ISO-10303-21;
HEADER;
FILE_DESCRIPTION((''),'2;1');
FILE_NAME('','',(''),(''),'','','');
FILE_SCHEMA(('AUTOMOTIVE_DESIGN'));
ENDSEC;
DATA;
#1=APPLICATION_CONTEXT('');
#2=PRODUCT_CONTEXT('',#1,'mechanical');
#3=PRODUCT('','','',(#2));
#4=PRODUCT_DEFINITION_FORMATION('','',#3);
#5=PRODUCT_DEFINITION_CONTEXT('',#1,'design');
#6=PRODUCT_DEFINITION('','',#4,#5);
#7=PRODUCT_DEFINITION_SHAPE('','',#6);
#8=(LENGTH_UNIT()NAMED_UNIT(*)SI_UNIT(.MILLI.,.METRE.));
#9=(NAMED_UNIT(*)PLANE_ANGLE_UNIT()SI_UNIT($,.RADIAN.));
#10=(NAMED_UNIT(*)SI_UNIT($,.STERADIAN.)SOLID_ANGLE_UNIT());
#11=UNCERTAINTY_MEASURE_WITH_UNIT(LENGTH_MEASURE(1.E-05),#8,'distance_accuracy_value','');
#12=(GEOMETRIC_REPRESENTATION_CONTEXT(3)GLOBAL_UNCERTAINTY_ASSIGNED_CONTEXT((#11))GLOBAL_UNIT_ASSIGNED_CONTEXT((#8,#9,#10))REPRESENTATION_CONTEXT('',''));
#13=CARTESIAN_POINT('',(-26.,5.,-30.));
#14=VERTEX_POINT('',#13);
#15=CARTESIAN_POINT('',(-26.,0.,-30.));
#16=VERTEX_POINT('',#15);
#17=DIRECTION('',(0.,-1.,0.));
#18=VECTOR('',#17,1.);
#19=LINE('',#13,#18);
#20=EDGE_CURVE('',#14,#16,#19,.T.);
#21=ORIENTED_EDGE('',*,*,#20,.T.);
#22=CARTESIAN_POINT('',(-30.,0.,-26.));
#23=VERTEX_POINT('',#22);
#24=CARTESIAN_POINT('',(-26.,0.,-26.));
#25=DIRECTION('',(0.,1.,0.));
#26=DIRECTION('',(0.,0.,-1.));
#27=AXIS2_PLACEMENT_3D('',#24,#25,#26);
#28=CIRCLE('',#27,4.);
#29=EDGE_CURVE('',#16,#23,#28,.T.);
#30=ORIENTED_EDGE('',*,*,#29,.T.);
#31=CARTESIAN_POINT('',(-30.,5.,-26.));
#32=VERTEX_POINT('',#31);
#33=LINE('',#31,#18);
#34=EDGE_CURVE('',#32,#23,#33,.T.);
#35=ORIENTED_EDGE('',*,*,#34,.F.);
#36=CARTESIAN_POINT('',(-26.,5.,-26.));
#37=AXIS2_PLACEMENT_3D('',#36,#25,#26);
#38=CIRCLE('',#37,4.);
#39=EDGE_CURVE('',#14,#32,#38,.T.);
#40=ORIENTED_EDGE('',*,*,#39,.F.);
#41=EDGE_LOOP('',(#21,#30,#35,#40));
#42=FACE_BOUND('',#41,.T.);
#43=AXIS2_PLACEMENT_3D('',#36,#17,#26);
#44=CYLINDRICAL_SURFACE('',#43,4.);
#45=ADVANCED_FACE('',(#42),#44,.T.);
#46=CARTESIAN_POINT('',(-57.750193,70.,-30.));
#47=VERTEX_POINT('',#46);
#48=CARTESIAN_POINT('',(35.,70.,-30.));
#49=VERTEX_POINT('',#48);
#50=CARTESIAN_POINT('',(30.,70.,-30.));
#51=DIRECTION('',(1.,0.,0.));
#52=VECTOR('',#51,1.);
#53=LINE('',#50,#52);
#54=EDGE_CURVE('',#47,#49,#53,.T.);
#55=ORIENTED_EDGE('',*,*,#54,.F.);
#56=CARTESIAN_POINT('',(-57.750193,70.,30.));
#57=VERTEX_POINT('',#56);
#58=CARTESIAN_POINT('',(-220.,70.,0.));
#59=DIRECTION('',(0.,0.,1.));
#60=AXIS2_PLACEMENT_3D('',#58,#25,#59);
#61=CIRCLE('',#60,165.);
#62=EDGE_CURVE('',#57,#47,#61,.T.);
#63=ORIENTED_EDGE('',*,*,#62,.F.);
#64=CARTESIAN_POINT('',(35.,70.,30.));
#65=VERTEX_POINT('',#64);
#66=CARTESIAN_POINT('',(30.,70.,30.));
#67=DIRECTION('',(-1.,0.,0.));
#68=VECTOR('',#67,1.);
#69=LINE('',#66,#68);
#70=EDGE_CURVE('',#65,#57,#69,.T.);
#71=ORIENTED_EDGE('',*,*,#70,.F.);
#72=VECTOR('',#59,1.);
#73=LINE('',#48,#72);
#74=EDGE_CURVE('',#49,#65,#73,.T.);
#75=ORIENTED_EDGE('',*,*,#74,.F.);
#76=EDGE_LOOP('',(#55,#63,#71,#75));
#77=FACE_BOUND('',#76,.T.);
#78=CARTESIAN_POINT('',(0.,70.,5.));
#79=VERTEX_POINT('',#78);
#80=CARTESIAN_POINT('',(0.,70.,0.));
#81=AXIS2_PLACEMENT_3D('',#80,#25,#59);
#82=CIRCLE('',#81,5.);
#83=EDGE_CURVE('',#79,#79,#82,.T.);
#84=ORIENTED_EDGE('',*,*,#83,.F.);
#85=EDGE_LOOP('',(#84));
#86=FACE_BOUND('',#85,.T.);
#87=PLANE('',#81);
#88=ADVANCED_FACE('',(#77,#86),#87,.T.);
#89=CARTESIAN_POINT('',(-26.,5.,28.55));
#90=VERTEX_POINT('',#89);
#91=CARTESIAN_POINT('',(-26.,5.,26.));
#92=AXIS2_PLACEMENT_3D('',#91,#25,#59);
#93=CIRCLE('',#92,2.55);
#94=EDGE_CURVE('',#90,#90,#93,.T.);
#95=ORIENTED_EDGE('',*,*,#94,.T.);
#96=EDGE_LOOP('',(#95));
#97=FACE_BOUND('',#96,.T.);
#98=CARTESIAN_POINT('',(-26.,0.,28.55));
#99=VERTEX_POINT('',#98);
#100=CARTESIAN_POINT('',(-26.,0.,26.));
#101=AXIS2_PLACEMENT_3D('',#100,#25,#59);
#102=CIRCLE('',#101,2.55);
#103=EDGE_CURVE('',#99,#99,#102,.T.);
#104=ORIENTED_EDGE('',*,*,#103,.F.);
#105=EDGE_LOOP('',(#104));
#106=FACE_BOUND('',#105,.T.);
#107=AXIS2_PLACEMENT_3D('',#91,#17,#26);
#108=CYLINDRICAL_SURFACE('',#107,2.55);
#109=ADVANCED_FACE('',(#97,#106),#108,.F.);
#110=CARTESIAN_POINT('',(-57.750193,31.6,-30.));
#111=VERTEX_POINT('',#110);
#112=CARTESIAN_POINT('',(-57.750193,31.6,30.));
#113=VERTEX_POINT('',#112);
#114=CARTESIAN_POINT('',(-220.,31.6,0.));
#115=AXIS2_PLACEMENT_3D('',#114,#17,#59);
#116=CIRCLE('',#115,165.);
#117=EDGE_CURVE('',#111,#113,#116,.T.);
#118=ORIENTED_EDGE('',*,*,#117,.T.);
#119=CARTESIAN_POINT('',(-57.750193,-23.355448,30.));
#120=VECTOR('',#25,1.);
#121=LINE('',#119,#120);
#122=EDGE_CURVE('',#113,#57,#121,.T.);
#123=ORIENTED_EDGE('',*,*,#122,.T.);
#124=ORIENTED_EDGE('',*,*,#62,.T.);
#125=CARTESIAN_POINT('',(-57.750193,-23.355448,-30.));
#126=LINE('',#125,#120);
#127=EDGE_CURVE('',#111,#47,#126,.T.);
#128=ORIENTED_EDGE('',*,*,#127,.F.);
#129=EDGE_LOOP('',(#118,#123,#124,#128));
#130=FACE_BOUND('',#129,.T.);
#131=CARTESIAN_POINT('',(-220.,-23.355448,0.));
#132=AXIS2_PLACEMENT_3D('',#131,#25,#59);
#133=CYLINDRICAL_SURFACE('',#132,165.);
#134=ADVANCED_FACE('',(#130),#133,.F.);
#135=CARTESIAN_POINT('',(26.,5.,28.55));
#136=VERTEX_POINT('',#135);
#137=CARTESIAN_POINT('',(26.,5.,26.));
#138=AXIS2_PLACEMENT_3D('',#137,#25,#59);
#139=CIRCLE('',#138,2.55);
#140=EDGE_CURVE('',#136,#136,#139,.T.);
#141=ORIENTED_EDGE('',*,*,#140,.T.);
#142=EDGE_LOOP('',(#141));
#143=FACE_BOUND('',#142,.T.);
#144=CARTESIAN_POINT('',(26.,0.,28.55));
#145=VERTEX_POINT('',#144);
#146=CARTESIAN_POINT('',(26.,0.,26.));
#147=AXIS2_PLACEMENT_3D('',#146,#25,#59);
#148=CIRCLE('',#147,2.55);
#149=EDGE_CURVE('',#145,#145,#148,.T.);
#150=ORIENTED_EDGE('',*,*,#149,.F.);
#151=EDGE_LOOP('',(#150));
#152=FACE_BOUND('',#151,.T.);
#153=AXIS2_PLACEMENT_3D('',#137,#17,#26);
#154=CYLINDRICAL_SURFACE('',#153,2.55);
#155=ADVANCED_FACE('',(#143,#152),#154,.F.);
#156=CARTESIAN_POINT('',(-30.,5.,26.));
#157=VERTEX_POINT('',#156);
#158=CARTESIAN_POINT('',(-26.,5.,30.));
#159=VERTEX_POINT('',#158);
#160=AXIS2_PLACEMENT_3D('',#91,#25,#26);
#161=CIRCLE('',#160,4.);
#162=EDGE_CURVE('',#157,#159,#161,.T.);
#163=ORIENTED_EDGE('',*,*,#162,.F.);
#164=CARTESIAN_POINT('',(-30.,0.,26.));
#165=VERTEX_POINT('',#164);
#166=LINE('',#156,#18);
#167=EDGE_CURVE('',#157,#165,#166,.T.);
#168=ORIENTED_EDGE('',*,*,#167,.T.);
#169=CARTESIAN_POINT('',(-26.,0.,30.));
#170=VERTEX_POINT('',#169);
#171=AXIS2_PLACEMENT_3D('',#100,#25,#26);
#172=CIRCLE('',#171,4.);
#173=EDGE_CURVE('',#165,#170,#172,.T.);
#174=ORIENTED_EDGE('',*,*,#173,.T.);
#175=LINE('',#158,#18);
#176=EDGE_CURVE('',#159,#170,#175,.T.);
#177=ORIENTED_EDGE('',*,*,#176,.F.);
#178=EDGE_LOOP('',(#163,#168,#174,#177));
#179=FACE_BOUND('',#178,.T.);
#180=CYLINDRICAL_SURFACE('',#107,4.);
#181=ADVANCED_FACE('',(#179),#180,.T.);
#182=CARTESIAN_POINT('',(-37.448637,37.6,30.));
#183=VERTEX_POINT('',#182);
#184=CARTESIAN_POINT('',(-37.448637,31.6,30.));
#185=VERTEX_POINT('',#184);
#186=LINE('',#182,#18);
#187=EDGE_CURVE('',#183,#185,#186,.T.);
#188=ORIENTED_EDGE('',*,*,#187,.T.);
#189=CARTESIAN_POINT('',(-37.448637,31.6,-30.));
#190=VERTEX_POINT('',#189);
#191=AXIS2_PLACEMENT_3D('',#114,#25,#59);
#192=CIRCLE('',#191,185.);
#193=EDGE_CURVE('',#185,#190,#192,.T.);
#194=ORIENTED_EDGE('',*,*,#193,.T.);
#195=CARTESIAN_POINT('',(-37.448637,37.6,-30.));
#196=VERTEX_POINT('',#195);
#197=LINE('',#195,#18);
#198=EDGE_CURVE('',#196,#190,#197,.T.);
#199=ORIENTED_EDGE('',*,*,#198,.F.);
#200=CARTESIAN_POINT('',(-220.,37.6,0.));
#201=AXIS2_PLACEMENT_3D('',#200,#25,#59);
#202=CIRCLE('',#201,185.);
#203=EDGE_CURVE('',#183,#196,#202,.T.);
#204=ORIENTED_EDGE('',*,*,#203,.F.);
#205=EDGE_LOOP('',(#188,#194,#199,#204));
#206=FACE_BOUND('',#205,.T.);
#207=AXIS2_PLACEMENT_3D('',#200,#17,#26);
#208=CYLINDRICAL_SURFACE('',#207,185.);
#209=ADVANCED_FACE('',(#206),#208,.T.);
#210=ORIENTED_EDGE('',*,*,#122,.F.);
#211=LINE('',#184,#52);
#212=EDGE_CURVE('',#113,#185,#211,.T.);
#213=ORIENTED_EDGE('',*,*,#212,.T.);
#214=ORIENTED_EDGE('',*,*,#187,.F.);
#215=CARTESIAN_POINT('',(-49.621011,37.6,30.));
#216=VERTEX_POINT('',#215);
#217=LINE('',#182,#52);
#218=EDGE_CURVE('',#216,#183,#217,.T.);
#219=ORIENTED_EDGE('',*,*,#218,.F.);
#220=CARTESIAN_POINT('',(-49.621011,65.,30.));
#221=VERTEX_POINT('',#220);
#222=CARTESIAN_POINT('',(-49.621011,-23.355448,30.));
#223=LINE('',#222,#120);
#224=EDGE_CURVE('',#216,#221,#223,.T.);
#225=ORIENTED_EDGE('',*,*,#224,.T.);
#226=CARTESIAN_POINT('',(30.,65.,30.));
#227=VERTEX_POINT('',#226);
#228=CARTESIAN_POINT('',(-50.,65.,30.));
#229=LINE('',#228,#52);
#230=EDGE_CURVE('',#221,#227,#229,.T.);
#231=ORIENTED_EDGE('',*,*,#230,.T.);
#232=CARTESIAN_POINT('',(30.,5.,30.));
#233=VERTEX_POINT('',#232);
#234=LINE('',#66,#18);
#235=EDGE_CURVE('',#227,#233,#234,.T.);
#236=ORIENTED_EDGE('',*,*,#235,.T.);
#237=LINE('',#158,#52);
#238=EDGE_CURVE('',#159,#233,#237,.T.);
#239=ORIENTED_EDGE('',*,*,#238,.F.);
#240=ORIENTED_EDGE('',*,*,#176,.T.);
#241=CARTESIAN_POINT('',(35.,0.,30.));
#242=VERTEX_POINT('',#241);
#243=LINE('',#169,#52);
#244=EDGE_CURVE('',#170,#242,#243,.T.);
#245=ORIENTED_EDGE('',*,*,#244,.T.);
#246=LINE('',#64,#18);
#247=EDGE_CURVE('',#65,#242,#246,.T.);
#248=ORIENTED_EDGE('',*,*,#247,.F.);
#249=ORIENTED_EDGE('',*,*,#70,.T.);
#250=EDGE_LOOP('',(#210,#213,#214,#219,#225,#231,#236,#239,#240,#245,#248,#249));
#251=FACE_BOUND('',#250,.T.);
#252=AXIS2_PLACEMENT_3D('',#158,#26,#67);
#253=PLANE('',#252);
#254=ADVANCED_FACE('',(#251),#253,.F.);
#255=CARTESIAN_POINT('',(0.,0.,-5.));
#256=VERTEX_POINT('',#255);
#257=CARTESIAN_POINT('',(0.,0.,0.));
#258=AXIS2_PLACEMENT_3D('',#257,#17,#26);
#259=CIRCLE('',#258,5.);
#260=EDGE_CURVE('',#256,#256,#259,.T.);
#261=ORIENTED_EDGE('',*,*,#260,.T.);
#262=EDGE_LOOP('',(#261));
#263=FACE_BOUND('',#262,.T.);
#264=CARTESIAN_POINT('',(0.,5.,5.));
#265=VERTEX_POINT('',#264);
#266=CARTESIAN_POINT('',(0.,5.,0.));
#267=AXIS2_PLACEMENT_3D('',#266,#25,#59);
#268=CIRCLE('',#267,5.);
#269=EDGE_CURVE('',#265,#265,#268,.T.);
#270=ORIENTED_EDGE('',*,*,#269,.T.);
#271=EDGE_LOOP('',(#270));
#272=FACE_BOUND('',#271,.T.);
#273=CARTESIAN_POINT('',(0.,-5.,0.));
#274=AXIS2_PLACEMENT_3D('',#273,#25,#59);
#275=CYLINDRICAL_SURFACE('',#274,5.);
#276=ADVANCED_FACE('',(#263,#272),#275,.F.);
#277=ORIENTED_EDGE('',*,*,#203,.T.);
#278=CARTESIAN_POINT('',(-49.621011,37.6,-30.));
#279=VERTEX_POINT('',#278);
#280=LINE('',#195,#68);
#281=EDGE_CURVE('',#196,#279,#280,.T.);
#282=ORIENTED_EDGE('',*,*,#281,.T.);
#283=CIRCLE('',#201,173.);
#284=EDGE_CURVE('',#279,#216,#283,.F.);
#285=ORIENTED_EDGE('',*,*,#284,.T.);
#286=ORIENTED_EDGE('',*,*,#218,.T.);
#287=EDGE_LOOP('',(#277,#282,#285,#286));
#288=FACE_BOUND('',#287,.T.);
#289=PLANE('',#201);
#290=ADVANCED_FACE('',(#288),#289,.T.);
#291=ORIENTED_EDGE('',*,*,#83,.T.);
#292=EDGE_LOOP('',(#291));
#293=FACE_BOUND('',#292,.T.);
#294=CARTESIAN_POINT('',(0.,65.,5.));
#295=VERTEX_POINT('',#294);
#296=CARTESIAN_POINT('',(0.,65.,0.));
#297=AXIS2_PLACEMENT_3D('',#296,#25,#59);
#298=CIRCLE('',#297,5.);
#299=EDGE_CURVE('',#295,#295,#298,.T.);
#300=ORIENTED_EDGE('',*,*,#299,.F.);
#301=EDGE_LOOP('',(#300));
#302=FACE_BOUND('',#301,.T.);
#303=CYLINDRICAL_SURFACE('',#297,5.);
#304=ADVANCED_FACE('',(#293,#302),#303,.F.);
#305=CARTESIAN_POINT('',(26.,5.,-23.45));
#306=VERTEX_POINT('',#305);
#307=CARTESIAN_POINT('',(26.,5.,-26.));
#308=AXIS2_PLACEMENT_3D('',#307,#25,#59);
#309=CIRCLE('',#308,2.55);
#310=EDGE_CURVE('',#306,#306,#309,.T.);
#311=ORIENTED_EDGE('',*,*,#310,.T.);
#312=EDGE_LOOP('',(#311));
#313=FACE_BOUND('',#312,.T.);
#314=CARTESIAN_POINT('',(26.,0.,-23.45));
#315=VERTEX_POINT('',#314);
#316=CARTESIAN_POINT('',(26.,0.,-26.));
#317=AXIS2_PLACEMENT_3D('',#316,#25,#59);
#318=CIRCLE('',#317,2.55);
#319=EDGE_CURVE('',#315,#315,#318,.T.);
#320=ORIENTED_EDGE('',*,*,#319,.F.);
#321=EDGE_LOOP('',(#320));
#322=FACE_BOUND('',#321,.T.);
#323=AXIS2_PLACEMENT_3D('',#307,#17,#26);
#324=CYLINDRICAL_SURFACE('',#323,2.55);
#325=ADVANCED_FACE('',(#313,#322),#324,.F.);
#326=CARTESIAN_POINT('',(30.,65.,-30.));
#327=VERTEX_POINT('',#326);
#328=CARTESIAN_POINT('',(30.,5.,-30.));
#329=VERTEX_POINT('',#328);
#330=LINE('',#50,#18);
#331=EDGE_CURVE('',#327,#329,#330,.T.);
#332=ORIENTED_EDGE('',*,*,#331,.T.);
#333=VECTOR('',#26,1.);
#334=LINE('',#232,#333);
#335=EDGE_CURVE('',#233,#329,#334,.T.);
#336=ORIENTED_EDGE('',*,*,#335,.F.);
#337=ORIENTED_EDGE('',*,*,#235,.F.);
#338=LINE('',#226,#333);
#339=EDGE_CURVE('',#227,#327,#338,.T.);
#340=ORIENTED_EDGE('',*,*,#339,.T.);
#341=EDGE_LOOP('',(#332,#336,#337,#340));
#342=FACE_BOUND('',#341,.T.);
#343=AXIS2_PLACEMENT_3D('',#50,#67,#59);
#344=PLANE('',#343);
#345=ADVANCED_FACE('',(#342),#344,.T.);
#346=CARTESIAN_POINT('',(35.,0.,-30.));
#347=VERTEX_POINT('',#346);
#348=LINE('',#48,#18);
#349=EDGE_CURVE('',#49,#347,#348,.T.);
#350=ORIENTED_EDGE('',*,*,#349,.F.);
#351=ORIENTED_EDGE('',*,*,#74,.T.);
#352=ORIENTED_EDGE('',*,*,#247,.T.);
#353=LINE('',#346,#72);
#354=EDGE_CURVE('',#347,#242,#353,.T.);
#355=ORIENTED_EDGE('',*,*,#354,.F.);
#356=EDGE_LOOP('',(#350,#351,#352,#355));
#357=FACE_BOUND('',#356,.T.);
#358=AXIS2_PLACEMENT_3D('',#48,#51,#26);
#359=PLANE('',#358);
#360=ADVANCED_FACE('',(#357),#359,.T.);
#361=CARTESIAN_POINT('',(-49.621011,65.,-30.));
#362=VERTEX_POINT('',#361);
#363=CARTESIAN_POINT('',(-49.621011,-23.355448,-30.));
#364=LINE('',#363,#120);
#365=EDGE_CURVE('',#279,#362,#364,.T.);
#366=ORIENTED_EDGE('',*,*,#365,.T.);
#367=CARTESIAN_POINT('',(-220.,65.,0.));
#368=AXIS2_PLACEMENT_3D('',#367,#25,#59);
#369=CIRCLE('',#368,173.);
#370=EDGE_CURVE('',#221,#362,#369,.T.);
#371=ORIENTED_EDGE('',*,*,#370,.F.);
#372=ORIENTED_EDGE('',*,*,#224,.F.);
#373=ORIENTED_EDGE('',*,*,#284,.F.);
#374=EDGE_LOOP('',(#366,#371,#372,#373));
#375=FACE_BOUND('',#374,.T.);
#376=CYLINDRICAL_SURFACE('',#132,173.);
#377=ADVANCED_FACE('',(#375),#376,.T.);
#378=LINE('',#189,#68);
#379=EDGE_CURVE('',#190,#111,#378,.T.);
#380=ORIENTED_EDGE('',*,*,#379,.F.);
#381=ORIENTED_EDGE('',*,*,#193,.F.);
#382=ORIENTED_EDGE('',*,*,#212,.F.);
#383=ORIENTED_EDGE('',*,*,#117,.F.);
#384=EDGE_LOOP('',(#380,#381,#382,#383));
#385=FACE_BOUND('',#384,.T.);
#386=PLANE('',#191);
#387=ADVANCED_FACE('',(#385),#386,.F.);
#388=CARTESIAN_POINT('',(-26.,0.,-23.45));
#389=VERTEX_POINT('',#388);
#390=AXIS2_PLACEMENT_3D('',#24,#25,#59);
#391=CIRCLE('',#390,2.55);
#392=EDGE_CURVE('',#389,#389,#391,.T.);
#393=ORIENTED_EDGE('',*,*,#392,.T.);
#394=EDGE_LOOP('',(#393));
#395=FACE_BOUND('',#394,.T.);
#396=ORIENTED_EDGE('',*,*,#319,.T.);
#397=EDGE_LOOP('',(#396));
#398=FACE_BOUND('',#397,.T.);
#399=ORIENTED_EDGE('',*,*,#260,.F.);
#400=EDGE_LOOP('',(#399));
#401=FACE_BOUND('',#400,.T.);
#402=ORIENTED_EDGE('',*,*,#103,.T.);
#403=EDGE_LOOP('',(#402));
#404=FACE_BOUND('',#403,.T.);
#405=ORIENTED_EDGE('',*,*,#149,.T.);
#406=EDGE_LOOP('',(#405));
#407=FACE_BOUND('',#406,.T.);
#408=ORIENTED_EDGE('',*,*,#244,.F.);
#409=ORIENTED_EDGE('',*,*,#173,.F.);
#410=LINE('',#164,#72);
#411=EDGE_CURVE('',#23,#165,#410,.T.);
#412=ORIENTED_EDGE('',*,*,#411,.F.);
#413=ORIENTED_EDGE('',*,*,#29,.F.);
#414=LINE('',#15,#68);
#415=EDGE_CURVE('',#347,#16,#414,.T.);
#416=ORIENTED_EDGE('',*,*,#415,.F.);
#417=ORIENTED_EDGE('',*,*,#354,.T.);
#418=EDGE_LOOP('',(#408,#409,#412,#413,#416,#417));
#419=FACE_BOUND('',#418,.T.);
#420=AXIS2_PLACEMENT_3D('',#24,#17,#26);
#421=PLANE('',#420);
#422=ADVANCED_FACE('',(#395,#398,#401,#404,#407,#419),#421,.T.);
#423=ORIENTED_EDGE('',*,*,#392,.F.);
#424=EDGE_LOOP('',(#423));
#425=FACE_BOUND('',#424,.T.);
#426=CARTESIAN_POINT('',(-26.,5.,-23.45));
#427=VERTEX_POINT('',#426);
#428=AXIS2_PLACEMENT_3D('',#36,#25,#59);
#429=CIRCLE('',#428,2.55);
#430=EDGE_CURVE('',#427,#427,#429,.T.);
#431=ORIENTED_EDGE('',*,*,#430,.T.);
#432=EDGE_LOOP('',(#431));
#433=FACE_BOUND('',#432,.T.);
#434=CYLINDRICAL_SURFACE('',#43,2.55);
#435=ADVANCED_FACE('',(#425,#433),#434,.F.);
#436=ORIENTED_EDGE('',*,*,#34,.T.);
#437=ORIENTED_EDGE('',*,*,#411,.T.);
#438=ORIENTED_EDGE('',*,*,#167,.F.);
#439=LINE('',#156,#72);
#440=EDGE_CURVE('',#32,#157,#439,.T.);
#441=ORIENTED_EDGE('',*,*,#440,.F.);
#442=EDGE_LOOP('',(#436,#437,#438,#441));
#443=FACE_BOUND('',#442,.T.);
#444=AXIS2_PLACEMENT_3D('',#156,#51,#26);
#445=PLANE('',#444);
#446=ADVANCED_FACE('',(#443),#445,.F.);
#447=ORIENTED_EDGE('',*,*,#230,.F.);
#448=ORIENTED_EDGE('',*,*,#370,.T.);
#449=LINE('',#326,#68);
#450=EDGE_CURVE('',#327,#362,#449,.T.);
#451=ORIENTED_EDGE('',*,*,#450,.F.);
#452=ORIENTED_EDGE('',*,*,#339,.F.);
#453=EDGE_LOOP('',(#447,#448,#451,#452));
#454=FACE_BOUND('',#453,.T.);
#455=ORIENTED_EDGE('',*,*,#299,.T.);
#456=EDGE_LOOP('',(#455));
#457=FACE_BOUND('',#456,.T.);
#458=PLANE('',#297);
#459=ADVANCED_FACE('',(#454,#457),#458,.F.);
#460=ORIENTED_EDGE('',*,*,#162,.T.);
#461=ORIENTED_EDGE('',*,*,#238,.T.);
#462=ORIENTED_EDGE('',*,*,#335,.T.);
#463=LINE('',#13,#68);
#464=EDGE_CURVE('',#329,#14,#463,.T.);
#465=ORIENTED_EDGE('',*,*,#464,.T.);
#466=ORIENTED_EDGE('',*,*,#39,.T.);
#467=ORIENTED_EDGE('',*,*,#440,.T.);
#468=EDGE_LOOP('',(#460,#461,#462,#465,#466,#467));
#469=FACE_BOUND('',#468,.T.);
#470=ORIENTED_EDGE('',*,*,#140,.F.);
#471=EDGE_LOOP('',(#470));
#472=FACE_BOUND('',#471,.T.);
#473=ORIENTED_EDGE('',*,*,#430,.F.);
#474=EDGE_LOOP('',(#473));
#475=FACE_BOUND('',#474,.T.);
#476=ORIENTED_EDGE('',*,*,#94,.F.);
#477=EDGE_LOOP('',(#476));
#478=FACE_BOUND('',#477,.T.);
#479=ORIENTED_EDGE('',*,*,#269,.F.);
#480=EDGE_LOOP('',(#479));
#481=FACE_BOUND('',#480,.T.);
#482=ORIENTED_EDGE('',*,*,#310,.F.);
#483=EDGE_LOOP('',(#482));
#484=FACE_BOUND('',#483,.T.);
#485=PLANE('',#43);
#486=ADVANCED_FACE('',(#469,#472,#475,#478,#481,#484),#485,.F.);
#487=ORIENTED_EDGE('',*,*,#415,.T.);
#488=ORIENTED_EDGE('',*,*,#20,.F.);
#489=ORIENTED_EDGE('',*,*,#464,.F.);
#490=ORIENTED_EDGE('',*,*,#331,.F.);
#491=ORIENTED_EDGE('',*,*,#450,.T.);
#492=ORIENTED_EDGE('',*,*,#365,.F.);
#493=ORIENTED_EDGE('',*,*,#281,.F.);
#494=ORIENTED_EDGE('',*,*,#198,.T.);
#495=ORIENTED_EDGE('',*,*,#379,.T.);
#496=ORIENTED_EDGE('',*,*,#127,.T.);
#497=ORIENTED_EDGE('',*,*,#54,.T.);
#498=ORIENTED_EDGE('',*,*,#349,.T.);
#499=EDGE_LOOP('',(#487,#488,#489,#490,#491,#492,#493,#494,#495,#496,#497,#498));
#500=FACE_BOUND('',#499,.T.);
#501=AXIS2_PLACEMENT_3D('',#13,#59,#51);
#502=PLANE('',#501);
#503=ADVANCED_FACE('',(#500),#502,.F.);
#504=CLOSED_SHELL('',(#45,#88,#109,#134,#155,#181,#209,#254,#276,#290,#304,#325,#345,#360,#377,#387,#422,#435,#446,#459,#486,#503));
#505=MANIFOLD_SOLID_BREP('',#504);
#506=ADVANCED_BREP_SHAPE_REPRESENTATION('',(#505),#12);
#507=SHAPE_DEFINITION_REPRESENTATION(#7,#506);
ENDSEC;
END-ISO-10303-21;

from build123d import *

# Parameters (mm, degrees)
SKETCH1_R           = 2.55
BOSS_EXTRUDE1_DEPTH = 5
SKETCH2_R           = 5
CUT_EXTRUDE1_DEPTH  = 10
SKETCH3_W           = 5
SKETCH3_H           = 60
BOSS_EXTRUDE2_DEPTH = 70
SKETCH4_W           = 80
SKETCH4_H           = 60
BOSS_EXTRUDE4_DEPTH = 5
SKETCH5_R           = 5
CUT_EXTRUDE3_DEPTH  = 5
BOSS_EXTRUDE6_DEPTH = 6
BOSS_EXTRUDE7_START = -32.4
BOSS_EXTRUDE7_DEPTH = 32.4


# Read off the part's stored shape, not the designer's step: Boss-Extrude7
with BuildPart() as part:
    # Sketch1 → Boss-Extrude1 (new body)
    with BuildSketch(Plane(origin=(0, 0, 0), x_dir=(1, 0, 0), z_dir=(0, 1, 0))):
        with BuildLine():
            Line((-26, -30), (30, -30))
            Line((30, -30), (30, 30))
            Line((30, 30), (-26, 30))
            ThreePointArc((-26, 30), (-28.828427125, 28.828427125), (-30, 26))
            Line((-30, 26), (-30, -26))
            ThreePointArc((-30, -26), (-28.828427125, -28.828427125), (-26, -30))
        make_face()
        with Locations(Location((26, 26, 0), (0, 0, 270))):
            Circle(SKETCH1_R, mode=Mode.SUBTRACT)
        with Locations(Location((-26, 26, 0), (0, 0, 270))):
            Circle(SKETCH1_R, mode=Mode.SUBTRACT)
        with Locations(Location((-26, -26, 0), (0, 0, 270))):
            Circle(SKETCH1_R, mode=Mode.SUBTRACT)
        with Locations(Location((26, -26, 0), (0, 0, 270))):
            Circle(SKETCH1_R, mode=Mode.SUBTRACT)
    extrude(amount=BOSS_EXTRUDE1_DEPTH)

    # Sketch2 → Cut-Extrude1 (cut)
    with BuildSketch(Plane(origin=(0, 5, 0), x_dir=(1, 0, 0), z_dir=(0, 1, 0))):
        with Locations(Location((0, 0, 0), (0, 0, 270))):
            Circle(SKETCH2_R)
    extrude(amount=-CUT_EXTRUDE1_DEPTH, mode=Mode.SUBTRACT)

    # Sketch3 → Boss-Extrude2 (add)
    with BuildSketch(Plane.XZ):
        with Locations((32.5, 0)):
            Rectangle(SKETCH3_W, SKETCH3_H)
    extrude(amount=-BOSS_EXTRUDE2_DEPTH)

    # Sketch4 → Boss-Extrude4 (add)
    with BuildSketch(Plane(origin=(0, 70, 0), x_dir=(1, 0, 0), z_dir=(0, 1, 0))):
        with Locations((-10, 0)):
            Rectangle(SKETCH4_W, SKETCH4_H)
    extrude(amount=-BOSS_EXTRUDE4_DEPTH)

    # Sketch5 → Cut-Extrude3 (cut)
    with BuildSketch(Plane(origin=(0, 70, 0), x_dir=(1, 0, 0), z_dir=(0, 1, 0))):
        with Locations(Location((0, 0, 0), (0, 0, 270))):
            Circle(SKETCH5_R)
    extrude(amount=-CUT_EXTRUDE3_DEPTH, mode=Mode.SUBTRACT)



with BuildPart() as body_2:
    # Sketch10 → Boss-Extrude6 (new body)
    with BuildSketch(Plane(origin=(0, 31.6, 0), x_dir=(1, 0, 0), z_dir=(0, 1, 0))):
        with BuildLine():
            Line((-37.448637365, -30), (-57.750192604, -30))
            ThreePointArc((-57.750192604, -30), (-55, 0), (-57.750192604, 30))
            Line((-57.750192604, 30), (-37.448637365, 30))
            ThreePointArc((-37.448637365, 30), (-35, 0), (-37.448637365, -30))
        make_face()
    extrude(amount=BOSS_EXTRUDE6_DEPTH)


with BuildPart() as part_1:
    add(part.part)

    add(body_2.part)  # Boss-Extrude7 merges body 2
    # Boss-Extrude7 outline → Boss-Extrude7 (add)
    with BuildSketch(Plane(origin=(0, 70, 0), x_dir=(1, 0, 0), z_dir=(0, 1, 0)).offset(BOSS_EXTRUDE7_START)):
        with BuildLine():
            ThreePointArc((-57.750192604, 30), (-55, 0), (-57.750192604, -30))
            Line((-57.750192604, -30), (-49.621010685, -30))
            ThreePointArc((-49.621010685, -30), (-47, 0), (-49.621010685, 30))
            Line((-49.621010685, 30), (-57.750192604, 30))
        make_face()
    extrude(amount=BOSS_EXTRUDE7_DEPTH)


solid = part_1.part
